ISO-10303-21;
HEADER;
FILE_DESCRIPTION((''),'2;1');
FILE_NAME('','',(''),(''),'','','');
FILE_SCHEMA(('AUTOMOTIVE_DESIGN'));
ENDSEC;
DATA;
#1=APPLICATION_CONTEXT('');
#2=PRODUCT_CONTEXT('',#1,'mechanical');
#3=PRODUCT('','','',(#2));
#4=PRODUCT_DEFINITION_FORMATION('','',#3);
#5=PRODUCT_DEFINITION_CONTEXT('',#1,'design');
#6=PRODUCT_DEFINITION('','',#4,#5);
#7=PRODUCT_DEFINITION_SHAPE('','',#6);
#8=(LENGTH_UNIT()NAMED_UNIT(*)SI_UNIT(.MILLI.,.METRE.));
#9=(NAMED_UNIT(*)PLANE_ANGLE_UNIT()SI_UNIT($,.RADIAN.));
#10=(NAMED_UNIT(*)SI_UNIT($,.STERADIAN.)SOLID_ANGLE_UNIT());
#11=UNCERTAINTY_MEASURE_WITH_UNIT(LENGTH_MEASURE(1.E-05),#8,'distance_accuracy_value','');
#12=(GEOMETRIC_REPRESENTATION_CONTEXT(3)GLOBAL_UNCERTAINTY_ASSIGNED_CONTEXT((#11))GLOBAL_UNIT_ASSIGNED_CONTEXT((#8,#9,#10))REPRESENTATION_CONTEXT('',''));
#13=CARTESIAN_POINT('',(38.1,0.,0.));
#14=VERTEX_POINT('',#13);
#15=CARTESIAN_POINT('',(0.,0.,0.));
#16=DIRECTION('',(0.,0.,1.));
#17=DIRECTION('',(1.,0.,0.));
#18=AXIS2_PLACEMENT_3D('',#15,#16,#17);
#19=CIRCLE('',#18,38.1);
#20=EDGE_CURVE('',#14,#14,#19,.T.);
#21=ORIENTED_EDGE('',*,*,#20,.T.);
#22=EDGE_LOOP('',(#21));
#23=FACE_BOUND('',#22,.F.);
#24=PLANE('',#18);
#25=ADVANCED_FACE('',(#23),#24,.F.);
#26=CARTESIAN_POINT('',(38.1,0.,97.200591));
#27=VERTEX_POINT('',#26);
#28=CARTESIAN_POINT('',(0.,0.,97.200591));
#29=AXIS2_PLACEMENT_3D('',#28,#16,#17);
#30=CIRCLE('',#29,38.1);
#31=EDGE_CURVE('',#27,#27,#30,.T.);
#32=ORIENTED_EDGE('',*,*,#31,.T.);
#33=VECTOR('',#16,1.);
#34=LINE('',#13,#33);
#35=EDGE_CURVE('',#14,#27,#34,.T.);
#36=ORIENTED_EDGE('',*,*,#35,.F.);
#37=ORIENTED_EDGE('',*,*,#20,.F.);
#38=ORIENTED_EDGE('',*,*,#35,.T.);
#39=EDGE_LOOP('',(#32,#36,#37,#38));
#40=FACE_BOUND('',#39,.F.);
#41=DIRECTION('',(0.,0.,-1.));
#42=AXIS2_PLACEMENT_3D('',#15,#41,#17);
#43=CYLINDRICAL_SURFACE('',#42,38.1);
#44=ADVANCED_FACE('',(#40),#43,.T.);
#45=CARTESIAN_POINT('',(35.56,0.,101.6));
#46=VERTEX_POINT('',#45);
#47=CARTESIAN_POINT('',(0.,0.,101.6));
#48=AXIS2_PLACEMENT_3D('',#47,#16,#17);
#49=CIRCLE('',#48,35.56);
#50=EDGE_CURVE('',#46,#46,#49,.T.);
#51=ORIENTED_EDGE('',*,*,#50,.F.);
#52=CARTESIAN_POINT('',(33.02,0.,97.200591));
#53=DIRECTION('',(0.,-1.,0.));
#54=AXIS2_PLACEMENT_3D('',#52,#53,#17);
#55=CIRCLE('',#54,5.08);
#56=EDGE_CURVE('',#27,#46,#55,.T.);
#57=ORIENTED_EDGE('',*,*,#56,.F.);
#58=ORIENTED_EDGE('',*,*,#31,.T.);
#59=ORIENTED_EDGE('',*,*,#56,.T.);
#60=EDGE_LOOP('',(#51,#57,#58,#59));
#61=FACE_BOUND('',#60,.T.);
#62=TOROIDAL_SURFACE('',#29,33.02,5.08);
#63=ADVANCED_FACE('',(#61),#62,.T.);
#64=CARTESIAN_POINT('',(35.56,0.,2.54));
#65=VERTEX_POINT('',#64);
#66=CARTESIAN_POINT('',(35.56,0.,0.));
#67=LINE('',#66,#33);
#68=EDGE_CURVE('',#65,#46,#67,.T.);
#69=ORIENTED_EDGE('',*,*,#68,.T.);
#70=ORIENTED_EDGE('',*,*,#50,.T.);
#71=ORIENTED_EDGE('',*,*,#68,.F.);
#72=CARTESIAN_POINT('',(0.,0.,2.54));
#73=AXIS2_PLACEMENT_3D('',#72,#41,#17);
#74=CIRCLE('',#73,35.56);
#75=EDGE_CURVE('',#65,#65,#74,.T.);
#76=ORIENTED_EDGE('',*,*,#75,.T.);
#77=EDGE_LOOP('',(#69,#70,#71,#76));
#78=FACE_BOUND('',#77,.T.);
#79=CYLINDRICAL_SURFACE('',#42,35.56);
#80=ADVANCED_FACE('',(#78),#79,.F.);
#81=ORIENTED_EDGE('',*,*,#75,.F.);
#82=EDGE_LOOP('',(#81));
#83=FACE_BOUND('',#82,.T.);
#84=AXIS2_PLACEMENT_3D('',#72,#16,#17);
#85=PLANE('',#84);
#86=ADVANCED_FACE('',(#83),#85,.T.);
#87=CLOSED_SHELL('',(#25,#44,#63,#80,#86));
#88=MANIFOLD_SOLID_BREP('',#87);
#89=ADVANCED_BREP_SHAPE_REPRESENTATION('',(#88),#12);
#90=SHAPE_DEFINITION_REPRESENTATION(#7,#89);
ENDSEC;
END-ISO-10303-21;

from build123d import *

# Parameters (mm, degrees)
F0_R     = 38.1
F1_DEPTH = 101.6
F2_T     = -2.54


# Not quite as in the source:
# - a fillet or chamfer that OpenCascade refuses, or shapes differently, is made with other operations: its cross-section is extruded or revolved along the edge and cut away or added


with BuildPart() as f1:
    # F0 (on Top) → F1 (new body)
    with BuildSketch(Plane.XY):
        Circle(F0_R)
    extrude(amount=F1_DEPTH)

    # F2
    f2_openings = [f1.faces().sort_by_distance(p)[0] for p in [
        (0, 0, 101.6),
    ]]
    offset(amount=F2_T, openings=f2_openings)

    # F3: fillet of radius 5.08 on 1 edges, made by hand

    # F3_s1 → F3_t2 (revolve, cut)
    with BuildSketch(Plane.XZ):
        with BuildLine():
            ThreePointArc((38.1, 97.2005909488), (37.4194090512, 99.7405909488), (35.56, 101.6))
            Line((35.56, 101.6), (38.1, 101.6))
            Line((38.1, 101.6), (38.1, 97.2005909488))
        make_face()
    revolve(axis=Axis((0, 0, 101.6), (0, 0, 1)), mode=Mode.SUBTRACT)


solid = f1.part
